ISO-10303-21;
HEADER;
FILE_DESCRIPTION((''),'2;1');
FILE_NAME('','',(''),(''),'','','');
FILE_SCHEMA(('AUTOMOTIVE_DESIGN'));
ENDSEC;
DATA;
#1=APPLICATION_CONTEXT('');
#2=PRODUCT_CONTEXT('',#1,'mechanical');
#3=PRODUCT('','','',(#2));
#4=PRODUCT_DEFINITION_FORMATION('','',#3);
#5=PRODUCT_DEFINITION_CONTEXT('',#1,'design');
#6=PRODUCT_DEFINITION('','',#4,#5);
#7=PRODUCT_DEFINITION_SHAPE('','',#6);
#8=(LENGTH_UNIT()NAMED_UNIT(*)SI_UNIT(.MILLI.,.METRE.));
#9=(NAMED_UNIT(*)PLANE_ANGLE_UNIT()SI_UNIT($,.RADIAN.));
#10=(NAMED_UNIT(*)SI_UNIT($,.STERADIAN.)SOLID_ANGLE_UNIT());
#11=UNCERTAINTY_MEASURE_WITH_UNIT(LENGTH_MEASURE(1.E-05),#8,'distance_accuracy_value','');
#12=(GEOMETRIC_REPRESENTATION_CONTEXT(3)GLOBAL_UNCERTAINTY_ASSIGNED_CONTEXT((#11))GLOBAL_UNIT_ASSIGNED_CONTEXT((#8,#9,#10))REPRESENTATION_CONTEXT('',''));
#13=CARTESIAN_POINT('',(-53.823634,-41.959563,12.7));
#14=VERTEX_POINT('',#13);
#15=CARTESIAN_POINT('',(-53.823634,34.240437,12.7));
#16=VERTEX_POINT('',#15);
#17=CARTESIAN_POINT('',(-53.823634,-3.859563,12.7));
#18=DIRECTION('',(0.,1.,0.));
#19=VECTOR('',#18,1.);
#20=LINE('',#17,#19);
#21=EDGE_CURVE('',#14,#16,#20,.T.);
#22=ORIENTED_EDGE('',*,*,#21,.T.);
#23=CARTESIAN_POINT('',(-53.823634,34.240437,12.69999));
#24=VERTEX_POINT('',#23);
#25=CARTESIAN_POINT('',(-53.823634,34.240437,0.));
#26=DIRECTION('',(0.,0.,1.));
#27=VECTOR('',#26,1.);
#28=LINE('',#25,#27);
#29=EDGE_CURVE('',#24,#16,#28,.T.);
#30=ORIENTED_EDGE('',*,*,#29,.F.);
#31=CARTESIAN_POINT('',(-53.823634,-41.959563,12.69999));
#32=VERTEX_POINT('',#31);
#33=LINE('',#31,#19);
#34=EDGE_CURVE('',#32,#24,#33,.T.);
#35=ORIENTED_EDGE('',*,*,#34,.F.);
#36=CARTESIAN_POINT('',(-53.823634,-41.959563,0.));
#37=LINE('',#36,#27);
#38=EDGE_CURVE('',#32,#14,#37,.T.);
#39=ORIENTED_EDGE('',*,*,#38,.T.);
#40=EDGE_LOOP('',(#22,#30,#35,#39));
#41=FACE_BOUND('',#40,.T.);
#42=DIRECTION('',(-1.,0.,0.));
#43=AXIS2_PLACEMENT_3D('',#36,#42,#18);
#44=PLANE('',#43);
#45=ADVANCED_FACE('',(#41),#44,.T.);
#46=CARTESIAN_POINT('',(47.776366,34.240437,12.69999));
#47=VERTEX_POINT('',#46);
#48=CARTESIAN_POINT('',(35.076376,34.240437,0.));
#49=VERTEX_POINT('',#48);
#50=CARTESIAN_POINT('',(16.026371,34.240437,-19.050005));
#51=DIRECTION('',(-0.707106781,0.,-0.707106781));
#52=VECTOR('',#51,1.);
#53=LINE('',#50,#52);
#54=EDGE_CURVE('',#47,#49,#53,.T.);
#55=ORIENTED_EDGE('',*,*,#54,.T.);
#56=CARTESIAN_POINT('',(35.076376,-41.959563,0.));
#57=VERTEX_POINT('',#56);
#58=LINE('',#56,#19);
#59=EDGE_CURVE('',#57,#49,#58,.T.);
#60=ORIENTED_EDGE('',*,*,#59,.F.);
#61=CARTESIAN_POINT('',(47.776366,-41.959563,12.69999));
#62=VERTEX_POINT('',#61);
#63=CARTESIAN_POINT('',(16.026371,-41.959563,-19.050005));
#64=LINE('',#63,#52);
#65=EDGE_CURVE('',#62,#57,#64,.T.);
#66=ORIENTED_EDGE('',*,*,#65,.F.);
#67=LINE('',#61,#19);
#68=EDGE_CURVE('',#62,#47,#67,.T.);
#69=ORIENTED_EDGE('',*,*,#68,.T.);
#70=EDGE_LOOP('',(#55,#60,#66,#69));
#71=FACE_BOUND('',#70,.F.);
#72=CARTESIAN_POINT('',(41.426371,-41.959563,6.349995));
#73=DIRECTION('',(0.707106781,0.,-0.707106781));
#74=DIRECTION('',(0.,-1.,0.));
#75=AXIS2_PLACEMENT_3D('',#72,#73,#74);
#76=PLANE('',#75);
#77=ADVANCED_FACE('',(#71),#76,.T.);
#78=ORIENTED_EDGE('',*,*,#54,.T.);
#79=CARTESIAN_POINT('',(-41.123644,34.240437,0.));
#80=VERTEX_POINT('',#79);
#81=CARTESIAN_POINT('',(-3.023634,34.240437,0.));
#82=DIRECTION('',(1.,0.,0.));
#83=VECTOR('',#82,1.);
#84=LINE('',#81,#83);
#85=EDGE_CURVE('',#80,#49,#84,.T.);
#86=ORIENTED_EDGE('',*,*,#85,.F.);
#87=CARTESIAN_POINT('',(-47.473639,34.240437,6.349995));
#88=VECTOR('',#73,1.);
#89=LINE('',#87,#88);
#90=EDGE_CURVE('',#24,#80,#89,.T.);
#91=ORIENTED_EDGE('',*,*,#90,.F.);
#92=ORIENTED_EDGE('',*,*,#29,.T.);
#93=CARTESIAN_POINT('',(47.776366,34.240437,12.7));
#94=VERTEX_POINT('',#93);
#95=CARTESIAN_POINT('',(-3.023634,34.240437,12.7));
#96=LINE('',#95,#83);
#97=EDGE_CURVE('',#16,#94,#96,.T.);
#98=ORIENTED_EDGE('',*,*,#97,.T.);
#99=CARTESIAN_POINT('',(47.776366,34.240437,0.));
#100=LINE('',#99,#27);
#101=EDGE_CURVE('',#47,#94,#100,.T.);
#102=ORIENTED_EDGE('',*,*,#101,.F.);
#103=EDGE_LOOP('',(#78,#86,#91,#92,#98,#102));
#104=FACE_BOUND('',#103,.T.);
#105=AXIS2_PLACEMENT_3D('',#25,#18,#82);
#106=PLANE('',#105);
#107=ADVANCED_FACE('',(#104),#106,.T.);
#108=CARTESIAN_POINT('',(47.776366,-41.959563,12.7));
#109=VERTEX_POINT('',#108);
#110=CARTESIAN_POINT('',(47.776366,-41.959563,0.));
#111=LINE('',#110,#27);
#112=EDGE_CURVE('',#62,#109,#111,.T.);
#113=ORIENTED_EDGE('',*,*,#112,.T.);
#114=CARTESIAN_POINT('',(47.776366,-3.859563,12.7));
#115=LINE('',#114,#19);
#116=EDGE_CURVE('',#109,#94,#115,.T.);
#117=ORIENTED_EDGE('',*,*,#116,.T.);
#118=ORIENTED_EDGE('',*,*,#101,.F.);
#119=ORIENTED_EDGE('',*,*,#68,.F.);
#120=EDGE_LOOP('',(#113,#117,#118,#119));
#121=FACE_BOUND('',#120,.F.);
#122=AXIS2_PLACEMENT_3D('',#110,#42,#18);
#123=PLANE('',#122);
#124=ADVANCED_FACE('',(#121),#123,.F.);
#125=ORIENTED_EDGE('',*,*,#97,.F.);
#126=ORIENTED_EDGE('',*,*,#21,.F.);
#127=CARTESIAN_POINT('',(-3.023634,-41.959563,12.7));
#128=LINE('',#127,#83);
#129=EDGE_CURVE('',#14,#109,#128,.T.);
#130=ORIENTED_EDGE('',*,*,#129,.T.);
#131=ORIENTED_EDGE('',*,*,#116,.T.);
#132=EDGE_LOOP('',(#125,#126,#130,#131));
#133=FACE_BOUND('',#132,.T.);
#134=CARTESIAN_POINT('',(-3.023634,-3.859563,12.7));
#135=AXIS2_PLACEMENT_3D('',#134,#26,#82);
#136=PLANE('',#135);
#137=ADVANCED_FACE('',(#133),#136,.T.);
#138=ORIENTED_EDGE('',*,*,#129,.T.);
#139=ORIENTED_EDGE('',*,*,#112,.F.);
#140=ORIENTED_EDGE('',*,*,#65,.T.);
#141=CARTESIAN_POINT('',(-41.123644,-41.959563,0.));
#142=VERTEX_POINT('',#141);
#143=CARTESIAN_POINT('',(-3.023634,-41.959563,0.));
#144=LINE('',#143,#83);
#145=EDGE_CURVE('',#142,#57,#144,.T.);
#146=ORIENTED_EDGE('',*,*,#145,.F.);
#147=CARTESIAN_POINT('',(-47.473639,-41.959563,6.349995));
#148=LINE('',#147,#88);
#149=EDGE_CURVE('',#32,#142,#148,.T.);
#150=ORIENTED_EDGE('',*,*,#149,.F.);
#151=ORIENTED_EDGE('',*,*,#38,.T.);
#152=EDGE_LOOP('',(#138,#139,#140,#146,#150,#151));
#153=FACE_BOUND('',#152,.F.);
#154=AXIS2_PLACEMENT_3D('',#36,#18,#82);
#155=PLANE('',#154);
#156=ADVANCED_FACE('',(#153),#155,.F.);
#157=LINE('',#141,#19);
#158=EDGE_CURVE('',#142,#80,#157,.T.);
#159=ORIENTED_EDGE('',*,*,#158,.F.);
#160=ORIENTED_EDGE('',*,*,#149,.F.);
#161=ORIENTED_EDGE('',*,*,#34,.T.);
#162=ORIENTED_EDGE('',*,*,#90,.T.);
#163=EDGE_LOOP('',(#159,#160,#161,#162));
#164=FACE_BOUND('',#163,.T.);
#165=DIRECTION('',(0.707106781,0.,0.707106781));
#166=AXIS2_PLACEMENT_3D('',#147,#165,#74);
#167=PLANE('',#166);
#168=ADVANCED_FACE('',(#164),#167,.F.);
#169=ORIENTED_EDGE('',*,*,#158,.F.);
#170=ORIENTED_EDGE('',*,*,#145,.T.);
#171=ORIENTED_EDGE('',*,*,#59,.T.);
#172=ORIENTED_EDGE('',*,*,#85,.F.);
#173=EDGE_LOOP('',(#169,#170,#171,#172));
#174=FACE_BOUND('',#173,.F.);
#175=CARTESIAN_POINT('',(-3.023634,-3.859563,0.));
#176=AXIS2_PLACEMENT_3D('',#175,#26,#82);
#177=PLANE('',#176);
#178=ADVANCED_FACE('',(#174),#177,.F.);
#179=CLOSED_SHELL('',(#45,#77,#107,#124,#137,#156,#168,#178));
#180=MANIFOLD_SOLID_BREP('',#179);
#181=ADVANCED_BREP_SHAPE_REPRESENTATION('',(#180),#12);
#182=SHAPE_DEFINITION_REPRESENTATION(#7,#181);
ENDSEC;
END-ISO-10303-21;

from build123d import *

# Parameters (mm, degrees)
F0_W     = 101.6
F0_H     = 76.2
F1_DEPTH = 12.7
F2_SIZE  = 12.69999


# Not quite as in the source:
# - a fillet or chamfer is up to 0.001 mm smaller than in the source, because OpenCascade refuses the exact size


with BuildPart() as f1:
    # F0 (on Top) → F1 (new body)
    with BuildSketch(Plane.XY):
        with Locations((-3.0236337334, -3.8595628137)):
            Rectangle(F0_W, F0_H)
    extrude(amount=F1_DEPTH)

    # F2 (size 12.7 in the source; OpenCascade refuses exactly that, so slightly less here)
    f2_edges = [f1.edges().sort_by_distance(p)[0] for p in [
        (47.776366, -3.859563, 0),
        (-53.823634, -3.859563, 0),
    ]]
    chamfer(f2_edges, length=F2_SIZE)


solid = f1.part
